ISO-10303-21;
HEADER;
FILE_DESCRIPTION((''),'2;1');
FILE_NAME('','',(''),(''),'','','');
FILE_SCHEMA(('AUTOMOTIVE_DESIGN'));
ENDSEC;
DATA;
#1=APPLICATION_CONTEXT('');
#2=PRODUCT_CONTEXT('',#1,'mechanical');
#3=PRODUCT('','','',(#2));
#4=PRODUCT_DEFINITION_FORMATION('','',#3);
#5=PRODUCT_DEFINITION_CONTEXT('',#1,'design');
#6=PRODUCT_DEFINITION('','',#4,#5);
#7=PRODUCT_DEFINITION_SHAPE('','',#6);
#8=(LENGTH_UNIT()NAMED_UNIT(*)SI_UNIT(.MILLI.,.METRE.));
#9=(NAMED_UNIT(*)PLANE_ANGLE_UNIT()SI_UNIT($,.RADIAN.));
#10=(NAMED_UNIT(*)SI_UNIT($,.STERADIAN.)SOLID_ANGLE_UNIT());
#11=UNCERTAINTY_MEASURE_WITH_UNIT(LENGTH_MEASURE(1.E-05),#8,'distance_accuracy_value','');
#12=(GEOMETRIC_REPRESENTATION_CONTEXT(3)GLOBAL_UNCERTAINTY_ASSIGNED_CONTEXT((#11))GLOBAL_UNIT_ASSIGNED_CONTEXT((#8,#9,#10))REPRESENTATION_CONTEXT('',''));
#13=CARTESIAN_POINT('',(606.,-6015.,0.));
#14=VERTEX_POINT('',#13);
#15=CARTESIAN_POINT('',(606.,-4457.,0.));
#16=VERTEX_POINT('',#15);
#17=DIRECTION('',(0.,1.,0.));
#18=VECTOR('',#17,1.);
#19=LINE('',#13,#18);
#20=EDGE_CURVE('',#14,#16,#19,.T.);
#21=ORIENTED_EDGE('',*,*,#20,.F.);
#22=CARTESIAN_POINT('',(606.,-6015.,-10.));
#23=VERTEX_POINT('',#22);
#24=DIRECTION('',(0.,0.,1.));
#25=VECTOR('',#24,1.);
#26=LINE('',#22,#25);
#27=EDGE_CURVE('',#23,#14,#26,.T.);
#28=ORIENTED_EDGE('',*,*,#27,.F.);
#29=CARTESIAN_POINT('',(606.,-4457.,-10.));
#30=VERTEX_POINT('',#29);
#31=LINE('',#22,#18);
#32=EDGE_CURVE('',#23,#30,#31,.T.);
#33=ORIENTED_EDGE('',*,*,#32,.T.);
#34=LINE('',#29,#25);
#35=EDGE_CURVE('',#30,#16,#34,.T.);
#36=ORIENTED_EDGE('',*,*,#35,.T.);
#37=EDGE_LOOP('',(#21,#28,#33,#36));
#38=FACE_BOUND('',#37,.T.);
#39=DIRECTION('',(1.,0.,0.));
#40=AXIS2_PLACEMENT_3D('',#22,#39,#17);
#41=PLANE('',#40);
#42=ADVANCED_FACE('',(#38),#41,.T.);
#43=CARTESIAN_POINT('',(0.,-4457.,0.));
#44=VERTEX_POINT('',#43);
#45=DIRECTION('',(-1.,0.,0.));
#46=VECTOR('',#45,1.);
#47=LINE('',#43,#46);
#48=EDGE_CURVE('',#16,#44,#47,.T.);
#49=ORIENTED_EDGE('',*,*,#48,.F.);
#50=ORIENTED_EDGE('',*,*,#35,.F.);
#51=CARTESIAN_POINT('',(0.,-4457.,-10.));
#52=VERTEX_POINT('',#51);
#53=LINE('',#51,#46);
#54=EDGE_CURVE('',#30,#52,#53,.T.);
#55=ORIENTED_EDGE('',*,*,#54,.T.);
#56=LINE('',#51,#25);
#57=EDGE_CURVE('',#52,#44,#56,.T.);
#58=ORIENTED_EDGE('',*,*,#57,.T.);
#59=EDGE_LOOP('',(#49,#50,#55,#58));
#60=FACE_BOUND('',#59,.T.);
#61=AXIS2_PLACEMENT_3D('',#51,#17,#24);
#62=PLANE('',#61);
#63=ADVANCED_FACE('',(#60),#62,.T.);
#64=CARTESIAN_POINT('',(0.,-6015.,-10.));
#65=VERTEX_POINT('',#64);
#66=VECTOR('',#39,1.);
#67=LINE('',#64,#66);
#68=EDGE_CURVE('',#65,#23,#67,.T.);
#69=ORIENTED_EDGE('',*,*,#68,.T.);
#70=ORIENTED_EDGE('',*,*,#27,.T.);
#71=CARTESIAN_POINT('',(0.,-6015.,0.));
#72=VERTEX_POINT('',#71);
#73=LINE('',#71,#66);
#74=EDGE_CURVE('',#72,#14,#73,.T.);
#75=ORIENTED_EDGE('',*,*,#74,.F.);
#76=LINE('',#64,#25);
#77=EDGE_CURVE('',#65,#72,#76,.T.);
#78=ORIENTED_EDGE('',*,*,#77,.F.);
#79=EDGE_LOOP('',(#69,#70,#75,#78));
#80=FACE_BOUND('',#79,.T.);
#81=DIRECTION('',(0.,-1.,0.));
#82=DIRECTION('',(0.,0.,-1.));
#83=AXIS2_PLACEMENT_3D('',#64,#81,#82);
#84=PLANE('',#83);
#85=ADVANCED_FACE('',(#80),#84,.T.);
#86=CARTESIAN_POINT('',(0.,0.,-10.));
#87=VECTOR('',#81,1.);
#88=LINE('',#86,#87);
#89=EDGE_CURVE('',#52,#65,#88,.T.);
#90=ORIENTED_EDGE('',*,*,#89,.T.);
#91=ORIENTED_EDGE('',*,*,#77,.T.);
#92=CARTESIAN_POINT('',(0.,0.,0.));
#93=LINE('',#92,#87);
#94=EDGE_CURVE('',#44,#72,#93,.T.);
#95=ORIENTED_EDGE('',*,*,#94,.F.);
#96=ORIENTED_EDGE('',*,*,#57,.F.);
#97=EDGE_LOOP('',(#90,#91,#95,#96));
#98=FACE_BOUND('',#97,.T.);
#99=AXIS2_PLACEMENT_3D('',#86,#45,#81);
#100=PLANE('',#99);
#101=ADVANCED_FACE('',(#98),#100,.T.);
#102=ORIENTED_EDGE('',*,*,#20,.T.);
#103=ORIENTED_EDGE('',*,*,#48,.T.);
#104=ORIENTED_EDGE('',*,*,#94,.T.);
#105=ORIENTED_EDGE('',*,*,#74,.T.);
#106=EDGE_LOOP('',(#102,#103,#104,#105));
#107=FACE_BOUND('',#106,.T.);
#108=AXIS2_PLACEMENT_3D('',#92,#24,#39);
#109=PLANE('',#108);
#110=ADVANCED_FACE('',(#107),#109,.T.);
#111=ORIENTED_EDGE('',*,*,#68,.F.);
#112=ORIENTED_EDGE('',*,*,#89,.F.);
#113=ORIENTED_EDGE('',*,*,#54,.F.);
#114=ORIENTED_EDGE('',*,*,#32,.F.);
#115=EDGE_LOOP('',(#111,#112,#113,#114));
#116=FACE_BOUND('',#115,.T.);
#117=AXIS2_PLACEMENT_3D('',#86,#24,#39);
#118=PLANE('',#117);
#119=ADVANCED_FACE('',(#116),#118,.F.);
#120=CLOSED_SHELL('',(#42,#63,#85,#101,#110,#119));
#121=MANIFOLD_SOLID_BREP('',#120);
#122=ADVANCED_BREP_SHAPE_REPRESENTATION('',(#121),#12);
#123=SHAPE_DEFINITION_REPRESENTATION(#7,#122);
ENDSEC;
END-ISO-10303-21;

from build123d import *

# Parameters (mm, degrees)
TABAN_FLAN_1_DEPTH         = 10
KES_EKSTR_ZYON1_DEPTH      = 6203.134229441
KES_EKSTR_ZYON1_DEPTH_BACK = 6203.134229441
IZIM2_W                    = 906
IZIM2_H                    = 514.622046042
KES_EKSTR_ZYON2_DEPTH      = 6203.134229441
KES_EKSTR_ZYON2_DEPTH_BACK = 6203.134229441
IZIM3_W                    = 1175.952493344
IZIM3_H                    = 433.266784627


# Sheet-metal steps are written as plain solids
with BuildPart() as part:
    # Çizim1 → Taban-Flanş1 (new body)
    with BuildSketch(Plane.XY):
        Polygon((0, 0), (0, -6015), (606, -6015), (606, -4460), (1512, -4460), (1512, 0), align=None)
    extrude(amount=-TABAN_FLAN_1_DEPTH)

    # Çizim2 → Kes-Ekstrüzyon1 (cut, two sides: drawn at the far end of the back side and taken through both)
    with BuildSketch(Plane.XY.offset(-KES_EKSTR_ZYON1_DEPTH_BACK)):
        Polygon((1512, -4457), (1512, 0), (0, 0), (0, -4457), (606, -4457), align=None)
        with Locations((1059, -4717.311023021)):
            Rectangle(IZIM2_W, IZIM2_H)
    extrude(amount=KES_EKSTR_ZYON1_DEPTH + KES_EKSTR_ZYON1_DEPTH_BACK, mode=Mode.SUBTRACT)

    # Çizim3 → Kes-Ekstrüzyon2 (cut, two sides: drawn at the far end of the back side and taken through both)
    with BuildSketch(Plane.XY.offset(-KES_EKSTR_ZYON2_DEPTH_BACK)):
        with Locations((1193.976246672, -4355.859551482)):
            Rectangle(IZIM3_W, IZIM3_H)
    extrude(amount=KES_EKSTR_ZYON2_DEPTH + KES_EKSTR_ZYON2_DEPTH_BACK, mode=Mode.SUBTRACT)


solid = part.part
